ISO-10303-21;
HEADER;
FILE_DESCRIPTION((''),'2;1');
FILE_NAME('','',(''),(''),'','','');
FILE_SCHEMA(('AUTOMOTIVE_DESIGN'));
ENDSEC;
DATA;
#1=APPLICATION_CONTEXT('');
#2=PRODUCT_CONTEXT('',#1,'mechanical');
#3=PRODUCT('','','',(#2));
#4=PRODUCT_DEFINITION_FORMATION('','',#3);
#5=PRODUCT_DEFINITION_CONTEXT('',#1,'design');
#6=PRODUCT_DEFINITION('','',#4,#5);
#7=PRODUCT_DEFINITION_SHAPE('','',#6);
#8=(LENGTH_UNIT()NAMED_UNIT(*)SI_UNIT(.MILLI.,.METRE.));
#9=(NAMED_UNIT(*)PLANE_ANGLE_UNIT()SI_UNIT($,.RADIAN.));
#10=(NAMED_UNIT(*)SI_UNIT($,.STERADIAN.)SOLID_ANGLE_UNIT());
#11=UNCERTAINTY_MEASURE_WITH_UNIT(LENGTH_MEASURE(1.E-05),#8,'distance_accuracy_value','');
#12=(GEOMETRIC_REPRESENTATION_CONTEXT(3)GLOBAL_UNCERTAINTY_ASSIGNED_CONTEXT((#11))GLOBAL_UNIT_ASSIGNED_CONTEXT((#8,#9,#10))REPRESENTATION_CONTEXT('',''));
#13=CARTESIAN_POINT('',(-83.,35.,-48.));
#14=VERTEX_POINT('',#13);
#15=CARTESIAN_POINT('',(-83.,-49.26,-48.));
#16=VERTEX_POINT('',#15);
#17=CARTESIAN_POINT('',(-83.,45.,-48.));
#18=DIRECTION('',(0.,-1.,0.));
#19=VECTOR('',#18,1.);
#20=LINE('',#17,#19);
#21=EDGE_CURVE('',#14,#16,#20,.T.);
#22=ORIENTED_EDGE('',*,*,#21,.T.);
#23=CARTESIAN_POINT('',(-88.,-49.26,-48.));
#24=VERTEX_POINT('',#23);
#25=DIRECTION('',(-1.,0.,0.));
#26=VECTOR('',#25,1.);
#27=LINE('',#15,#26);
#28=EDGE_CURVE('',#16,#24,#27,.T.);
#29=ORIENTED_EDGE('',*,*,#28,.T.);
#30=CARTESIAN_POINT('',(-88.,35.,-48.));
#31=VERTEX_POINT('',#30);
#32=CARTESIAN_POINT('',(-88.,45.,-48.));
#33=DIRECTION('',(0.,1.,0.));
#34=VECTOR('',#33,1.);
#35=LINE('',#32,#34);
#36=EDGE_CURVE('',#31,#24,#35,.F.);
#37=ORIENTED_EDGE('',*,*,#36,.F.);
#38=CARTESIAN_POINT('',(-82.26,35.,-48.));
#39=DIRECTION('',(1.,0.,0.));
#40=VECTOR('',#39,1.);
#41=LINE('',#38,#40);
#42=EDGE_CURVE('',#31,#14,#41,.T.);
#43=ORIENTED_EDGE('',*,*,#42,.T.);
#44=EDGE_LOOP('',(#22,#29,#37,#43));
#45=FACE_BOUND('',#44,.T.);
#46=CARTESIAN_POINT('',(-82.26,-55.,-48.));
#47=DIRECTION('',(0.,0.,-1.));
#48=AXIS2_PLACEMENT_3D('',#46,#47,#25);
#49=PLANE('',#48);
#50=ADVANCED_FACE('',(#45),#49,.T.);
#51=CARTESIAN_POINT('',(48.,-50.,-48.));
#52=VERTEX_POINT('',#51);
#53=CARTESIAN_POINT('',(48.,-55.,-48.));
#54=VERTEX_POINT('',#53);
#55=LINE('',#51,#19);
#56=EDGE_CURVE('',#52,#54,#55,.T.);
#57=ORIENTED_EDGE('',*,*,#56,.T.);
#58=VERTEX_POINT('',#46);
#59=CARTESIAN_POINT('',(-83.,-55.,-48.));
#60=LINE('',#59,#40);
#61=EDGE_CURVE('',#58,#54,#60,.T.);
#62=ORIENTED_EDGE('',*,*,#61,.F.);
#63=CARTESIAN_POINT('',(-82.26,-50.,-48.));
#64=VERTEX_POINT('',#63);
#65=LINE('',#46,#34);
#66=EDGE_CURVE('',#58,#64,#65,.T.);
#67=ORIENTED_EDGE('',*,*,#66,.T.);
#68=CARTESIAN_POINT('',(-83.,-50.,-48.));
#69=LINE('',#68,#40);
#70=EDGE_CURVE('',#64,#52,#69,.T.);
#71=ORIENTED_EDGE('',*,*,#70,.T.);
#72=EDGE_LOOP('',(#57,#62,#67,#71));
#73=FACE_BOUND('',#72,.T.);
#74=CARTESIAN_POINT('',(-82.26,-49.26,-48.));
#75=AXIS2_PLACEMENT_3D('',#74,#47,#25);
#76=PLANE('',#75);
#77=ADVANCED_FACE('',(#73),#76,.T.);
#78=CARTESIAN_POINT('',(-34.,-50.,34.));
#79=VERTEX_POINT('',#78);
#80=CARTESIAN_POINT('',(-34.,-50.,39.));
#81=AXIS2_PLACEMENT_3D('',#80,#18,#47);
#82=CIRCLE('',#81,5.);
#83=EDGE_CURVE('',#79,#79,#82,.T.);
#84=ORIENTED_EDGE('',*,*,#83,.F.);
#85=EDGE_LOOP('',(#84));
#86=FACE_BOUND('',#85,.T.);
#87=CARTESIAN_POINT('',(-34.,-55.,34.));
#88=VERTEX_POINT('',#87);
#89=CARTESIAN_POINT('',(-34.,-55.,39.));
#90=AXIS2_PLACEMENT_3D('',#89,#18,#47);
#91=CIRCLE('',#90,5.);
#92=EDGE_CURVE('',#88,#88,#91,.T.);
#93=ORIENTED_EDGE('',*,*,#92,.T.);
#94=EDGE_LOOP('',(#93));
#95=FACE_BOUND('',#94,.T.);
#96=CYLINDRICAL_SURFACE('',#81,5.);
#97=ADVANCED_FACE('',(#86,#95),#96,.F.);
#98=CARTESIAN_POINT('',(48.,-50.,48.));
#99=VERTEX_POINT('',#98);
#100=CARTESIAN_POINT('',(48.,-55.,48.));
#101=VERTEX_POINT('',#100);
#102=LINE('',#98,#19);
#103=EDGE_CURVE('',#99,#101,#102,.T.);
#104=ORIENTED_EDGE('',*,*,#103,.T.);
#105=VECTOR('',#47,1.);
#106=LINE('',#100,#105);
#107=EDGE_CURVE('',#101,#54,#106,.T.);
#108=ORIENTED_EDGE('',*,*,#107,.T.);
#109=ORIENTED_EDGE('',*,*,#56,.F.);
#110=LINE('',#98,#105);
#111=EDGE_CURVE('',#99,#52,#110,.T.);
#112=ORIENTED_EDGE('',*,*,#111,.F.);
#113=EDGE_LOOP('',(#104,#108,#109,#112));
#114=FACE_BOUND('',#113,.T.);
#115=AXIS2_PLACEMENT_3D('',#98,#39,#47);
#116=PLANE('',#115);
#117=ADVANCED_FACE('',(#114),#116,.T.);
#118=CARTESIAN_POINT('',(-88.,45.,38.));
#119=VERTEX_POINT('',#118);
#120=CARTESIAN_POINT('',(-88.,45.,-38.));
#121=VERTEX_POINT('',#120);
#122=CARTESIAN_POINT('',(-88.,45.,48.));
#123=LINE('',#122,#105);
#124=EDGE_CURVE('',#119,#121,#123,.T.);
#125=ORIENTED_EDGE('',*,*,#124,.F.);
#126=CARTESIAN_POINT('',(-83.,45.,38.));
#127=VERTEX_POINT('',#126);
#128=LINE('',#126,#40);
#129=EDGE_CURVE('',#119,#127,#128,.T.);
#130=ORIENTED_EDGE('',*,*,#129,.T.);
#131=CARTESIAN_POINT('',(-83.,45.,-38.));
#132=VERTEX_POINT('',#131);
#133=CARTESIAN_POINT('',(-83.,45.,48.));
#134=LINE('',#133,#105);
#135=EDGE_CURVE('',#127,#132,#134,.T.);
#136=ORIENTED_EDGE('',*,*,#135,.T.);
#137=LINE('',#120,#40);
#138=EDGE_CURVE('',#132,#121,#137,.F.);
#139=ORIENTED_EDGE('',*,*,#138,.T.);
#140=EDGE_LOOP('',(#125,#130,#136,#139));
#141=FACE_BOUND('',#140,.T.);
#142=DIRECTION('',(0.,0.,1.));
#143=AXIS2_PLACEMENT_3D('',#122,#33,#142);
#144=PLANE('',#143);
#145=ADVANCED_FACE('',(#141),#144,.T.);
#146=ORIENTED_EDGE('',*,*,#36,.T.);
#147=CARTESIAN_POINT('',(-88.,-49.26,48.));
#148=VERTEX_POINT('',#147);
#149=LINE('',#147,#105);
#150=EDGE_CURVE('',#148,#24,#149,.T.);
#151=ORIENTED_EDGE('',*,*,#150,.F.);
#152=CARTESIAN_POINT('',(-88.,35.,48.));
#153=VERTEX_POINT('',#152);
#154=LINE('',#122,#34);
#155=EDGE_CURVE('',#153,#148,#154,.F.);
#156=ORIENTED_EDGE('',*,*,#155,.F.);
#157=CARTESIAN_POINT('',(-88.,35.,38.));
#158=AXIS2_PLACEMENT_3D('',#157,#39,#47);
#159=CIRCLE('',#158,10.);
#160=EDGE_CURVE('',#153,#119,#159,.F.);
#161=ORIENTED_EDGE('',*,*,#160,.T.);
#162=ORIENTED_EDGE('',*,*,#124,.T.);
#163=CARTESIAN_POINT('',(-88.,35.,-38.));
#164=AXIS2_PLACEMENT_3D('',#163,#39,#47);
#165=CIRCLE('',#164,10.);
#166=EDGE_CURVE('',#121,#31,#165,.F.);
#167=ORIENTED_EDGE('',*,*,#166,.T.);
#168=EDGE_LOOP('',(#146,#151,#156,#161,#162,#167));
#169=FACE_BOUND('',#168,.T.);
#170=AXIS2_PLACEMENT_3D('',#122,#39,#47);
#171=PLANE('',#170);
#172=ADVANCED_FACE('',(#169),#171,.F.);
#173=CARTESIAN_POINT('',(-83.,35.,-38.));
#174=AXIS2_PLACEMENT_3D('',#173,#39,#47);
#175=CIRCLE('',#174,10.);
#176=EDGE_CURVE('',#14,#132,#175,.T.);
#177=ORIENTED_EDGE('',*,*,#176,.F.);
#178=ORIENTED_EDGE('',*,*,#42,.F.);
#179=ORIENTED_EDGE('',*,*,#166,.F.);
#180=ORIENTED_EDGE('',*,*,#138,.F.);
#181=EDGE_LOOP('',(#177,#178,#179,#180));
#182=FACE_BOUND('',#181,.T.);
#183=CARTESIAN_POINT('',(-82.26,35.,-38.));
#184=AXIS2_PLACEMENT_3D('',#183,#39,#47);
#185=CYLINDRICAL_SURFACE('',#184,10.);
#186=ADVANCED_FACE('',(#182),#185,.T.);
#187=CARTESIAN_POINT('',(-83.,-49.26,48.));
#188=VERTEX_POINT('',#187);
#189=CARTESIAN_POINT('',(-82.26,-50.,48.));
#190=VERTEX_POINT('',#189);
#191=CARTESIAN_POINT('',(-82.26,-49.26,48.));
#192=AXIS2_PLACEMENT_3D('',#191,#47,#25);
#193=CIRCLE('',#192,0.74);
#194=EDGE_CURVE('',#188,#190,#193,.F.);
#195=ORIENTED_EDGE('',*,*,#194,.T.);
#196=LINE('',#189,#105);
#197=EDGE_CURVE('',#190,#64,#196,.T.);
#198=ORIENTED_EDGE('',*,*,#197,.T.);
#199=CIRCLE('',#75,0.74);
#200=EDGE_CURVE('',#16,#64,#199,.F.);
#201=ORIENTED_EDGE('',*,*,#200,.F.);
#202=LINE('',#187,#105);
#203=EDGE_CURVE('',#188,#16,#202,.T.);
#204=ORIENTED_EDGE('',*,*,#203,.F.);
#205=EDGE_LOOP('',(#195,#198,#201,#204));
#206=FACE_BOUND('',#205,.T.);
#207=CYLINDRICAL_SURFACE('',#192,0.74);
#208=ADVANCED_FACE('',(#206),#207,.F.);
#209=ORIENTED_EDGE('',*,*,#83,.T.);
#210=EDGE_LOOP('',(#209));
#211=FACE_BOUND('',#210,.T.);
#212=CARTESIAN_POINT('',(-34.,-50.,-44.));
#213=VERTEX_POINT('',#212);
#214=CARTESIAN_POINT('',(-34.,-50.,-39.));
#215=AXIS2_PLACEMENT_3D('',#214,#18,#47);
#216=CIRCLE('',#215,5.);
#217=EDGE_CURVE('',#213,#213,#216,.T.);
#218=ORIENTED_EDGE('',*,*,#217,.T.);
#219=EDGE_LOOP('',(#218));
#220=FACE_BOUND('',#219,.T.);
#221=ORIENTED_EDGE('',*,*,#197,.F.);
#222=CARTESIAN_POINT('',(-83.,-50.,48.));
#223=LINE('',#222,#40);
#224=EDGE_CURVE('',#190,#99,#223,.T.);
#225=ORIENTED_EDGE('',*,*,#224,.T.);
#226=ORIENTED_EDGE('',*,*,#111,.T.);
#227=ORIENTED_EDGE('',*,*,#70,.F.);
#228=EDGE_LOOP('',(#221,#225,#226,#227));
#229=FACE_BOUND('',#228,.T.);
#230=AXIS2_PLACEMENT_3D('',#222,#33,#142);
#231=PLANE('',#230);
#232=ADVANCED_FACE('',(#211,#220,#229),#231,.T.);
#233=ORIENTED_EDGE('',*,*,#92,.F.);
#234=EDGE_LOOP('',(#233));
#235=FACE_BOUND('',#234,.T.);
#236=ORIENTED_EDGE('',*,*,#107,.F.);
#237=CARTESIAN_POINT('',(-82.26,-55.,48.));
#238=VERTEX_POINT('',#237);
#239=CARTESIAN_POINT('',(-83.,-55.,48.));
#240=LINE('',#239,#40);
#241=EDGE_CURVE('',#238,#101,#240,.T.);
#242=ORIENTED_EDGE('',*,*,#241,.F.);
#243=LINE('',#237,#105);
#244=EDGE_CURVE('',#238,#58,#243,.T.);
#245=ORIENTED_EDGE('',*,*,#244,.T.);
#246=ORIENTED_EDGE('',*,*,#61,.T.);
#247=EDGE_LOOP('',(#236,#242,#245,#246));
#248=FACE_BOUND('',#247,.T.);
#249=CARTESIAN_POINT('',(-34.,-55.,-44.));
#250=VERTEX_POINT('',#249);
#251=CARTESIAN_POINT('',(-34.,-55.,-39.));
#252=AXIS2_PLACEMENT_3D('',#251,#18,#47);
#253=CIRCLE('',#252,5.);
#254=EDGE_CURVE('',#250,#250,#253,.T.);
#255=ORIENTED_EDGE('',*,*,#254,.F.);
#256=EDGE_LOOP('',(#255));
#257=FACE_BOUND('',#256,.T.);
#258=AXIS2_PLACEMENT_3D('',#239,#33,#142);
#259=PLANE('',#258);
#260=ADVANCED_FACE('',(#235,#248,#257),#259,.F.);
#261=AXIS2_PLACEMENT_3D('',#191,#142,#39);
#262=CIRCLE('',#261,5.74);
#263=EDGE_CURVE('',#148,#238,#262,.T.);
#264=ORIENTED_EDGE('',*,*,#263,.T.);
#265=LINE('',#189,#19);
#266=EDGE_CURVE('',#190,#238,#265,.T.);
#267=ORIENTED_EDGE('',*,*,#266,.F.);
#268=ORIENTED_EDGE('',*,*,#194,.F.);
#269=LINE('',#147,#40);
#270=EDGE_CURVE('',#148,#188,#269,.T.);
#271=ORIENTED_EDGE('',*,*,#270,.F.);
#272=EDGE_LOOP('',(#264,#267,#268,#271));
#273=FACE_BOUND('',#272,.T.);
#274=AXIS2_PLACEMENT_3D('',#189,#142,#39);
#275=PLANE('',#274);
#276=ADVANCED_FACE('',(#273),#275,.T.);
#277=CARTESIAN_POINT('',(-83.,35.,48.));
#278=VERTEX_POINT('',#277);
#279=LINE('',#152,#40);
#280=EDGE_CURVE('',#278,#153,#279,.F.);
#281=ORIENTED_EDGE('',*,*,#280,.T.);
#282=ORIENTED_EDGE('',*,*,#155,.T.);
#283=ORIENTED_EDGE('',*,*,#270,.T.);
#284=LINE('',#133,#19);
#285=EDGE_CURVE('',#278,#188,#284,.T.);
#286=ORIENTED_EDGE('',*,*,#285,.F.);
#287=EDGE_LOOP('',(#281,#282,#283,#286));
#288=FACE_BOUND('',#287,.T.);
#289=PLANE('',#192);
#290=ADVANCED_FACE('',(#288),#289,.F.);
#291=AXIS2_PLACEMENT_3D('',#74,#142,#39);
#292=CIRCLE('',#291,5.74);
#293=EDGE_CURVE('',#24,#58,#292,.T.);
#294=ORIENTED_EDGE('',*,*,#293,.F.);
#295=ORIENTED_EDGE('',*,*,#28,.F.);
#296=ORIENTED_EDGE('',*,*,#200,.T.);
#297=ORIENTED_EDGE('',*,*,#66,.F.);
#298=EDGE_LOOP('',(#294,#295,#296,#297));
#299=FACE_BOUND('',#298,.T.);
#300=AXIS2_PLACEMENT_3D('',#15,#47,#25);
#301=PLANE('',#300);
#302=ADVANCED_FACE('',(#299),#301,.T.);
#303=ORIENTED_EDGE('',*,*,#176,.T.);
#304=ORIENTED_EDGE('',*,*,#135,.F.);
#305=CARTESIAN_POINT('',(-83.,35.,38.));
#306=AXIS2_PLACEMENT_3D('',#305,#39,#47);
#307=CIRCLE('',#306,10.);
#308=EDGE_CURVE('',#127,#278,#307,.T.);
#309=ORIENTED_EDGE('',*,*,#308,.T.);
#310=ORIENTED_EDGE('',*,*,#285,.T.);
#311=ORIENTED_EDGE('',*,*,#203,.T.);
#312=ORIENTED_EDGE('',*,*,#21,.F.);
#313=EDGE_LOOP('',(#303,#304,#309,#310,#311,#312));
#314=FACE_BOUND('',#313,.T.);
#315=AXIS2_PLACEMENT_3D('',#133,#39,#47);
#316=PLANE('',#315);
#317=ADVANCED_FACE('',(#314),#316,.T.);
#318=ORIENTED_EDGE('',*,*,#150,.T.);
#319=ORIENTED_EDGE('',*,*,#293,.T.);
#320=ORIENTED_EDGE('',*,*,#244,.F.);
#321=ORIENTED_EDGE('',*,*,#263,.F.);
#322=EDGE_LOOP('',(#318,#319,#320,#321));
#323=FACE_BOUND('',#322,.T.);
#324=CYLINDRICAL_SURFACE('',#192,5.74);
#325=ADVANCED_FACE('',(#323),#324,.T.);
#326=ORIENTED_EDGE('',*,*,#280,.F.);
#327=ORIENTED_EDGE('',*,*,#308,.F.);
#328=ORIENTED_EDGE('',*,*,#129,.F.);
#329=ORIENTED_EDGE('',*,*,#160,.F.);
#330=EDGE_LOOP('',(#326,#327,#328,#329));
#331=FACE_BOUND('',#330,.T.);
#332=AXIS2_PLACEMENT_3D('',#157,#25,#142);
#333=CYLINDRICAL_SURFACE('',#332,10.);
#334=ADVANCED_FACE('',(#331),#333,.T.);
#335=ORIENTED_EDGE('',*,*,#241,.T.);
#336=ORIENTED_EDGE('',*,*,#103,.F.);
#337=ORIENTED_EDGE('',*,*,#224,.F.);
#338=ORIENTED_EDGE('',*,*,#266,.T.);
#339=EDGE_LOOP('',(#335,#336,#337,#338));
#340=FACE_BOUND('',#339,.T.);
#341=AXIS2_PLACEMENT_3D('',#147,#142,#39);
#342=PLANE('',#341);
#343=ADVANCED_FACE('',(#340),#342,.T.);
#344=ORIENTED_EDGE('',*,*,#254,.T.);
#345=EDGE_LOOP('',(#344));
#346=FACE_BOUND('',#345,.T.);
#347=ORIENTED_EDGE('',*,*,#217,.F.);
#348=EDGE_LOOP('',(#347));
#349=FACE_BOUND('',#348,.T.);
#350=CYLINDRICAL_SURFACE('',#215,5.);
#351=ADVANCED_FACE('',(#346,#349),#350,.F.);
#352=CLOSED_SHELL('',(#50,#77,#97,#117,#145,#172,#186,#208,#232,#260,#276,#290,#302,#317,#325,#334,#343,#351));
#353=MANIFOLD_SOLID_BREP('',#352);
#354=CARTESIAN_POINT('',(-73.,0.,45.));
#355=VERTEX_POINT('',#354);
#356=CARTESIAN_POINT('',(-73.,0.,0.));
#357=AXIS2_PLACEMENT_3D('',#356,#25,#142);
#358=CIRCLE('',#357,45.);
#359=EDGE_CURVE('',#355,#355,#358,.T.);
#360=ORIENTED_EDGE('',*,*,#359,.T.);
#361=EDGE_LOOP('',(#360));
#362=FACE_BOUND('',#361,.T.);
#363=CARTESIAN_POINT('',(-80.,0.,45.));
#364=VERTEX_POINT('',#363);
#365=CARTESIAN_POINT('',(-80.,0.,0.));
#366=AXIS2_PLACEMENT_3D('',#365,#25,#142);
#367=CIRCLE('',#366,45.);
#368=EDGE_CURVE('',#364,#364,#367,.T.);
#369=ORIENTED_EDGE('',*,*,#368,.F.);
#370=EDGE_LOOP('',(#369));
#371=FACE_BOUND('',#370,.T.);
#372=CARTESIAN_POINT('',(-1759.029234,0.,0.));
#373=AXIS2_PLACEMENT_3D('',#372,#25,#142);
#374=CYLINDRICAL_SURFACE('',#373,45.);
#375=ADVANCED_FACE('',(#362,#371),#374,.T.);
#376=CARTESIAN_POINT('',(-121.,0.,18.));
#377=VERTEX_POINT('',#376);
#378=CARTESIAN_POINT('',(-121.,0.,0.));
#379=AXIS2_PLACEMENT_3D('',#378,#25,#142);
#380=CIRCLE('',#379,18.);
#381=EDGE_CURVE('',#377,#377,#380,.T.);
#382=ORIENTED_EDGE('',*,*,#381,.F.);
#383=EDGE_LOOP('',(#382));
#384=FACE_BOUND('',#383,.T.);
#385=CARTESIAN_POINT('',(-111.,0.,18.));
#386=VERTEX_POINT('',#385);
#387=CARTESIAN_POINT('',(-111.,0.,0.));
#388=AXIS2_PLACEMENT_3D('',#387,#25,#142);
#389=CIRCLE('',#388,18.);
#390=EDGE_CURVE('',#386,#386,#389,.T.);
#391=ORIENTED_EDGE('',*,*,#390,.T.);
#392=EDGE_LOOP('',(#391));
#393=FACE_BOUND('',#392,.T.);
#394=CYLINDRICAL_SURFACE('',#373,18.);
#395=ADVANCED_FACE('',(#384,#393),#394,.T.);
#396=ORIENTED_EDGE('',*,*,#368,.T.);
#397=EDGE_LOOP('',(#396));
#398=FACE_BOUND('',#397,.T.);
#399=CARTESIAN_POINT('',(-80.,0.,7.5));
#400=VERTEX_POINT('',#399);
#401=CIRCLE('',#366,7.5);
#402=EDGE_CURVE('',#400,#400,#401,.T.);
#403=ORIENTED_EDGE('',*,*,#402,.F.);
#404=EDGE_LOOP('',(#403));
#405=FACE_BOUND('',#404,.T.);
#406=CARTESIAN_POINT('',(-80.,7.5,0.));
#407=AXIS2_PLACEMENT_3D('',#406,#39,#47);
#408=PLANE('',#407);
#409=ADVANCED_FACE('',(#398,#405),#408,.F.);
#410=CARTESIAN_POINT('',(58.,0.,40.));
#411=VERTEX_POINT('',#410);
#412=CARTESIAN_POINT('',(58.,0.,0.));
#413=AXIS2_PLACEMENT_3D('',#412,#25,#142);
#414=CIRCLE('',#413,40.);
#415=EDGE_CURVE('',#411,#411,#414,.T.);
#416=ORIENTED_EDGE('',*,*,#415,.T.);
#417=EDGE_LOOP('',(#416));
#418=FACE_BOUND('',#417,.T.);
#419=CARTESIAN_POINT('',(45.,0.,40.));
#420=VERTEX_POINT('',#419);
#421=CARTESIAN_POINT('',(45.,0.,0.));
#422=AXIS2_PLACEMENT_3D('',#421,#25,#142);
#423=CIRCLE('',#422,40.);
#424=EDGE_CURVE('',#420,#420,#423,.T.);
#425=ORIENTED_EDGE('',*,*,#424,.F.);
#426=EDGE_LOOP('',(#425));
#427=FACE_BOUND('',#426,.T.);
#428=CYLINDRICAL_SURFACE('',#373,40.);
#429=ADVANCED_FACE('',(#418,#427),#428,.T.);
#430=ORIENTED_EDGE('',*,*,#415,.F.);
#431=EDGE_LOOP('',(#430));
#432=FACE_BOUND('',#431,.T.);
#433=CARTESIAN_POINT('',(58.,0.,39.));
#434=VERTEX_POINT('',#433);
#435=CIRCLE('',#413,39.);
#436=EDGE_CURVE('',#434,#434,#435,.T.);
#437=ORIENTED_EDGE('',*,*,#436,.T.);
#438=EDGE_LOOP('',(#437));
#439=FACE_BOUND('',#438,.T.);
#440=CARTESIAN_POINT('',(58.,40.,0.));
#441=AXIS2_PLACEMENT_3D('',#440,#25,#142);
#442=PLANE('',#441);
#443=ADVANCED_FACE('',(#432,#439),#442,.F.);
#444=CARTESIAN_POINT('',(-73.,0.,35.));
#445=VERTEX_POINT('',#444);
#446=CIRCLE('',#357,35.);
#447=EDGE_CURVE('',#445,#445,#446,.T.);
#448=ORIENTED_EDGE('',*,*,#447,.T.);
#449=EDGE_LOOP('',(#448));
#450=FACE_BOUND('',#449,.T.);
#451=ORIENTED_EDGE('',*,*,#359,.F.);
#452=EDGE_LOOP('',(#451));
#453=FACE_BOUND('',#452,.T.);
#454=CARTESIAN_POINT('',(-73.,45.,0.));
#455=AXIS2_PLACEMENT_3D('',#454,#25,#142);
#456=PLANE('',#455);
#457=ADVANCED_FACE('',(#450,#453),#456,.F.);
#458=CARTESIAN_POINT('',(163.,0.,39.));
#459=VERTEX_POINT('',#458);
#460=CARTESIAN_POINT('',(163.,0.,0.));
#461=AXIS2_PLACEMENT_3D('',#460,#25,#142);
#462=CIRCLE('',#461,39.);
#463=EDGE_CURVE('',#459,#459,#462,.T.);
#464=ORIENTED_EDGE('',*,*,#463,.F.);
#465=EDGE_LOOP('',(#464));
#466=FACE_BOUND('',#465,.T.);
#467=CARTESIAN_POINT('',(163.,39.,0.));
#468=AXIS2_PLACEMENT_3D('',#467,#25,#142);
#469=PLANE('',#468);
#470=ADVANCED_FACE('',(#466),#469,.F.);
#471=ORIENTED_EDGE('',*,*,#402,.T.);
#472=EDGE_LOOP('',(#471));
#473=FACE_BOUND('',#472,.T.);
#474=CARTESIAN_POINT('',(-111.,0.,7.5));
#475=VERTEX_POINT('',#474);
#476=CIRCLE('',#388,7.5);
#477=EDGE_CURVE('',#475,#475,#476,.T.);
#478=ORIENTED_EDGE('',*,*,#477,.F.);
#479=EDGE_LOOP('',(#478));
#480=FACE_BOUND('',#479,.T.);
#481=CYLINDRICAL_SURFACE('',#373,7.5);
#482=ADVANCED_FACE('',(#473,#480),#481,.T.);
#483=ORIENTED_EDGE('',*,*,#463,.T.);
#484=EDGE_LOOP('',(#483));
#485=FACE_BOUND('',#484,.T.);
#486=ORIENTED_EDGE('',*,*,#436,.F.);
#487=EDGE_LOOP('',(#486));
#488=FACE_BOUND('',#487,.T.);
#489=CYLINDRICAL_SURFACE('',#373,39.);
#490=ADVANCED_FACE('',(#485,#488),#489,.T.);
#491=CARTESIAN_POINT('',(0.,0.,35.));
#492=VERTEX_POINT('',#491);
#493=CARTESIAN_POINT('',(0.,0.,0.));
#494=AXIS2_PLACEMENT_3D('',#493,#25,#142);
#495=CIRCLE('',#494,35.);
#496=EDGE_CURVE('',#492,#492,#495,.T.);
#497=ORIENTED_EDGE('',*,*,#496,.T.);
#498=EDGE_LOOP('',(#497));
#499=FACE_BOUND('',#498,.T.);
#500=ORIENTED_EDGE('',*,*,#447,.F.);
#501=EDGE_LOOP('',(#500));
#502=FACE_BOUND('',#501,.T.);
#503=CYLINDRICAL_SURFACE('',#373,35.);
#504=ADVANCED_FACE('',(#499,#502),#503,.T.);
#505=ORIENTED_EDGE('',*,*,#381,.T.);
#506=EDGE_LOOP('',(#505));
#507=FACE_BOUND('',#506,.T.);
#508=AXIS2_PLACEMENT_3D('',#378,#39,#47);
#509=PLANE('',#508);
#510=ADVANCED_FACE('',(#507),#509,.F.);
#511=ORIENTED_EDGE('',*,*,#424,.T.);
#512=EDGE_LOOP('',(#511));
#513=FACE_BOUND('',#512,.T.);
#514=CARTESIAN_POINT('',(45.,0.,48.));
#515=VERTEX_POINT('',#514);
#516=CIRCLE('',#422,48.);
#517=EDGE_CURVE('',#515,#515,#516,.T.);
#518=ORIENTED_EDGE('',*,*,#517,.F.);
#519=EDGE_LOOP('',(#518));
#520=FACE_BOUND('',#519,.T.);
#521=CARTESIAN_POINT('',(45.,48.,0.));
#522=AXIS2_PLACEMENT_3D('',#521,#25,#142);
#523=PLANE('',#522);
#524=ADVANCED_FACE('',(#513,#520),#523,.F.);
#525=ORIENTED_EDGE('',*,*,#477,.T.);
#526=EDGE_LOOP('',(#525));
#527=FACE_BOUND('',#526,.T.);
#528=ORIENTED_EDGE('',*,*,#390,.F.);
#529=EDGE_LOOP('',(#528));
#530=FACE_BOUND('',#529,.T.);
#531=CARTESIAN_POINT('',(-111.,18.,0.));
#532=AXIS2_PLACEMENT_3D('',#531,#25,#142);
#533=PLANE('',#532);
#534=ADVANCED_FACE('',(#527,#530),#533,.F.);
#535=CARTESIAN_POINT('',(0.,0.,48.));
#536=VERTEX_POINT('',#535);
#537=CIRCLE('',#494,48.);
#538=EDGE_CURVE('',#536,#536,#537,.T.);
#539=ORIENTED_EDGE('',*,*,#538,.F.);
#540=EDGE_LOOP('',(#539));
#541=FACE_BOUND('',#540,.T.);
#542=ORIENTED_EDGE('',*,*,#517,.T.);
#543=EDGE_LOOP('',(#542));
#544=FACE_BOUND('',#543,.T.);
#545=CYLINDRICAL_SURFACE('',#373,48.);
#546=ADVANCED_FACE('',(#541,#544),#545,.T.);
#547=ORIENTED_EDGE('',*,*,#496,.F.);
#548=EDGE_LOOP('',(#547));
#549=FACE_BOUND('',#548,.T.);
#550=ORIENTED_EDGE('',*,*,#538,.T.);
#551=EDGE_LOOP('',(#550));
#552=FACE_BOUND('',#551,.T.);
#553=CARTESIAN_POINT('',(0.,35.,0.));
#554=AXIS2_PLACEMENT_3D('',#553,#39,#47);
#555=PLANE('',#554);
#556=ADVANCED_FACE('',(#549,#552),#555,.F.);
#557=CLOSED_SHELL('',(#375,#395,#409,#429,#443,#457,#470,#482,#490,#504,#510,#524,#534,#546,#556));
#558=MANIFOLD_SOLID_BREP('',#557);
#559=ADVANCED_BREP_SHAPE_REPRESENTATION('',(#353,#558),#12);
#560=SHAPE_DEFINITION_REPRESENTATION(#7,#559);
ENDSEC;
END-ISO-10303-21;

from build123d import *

# Parameters (mm, degrees)
SM_BASE_FLANGE_1_DEPTH = 48
FILLET_1_R             = 10
SKETCH_7_R             = 5
CUT_EXTRUDE_1_DEPTH    = 10


# Sheet-metal steps are written as plain solids
with BuildPart() as part:
    # Sketch 1 → Повернуть1 (revolve)
    with BuildSketch(Plane.XY, mode=Mode.PRIVATE) as revolve_1_sk:
        Polygon((-121, 0), (-121, 18), (-111, 18), (-111, 7.5), (-80, 7.5), (-80, 45), (-73, 45), (-73, 35), (0, 35), (0, 48), (45, 48), (45, 40), (58, 40), (58, 39), (163, 39), (163, 0), align=None)
    revolve(revolve_1_sk.sketch.rotate(Axis((-1759.029233716, 0, 0), (1, 0, 0)), 90), axis=Axis((-1759.029233716, 0, 0), (1, 0, 0)))


with BuildPart() as body_2:
    # Sketch 2 → Базовая кромка1 (new, symmetric)
    with BuildSketch(Plane.XY):
        with BuildLine():
            Line((-83, 45), (-83, -49.26))
            ThreePointArc((-83, -49.26), (-82.783259018, -49.783259018), (-82.26, -50))
            Line((-82.26, -50), (48, -50))
            Line((48, -50), (48, -55))
            Line((48, -55), (-82.26, -55))
            ThreePointArc((-82.26, -55), (-86.318792924, -53.318792924), (-88, -49.26))
            Line((-88, -49.26), (-88, 45))
            Line((-88, 45), (-83, 45))
        make_face()
    extrude(amount=SM_BASE_FLANGE_1_DEPTH, both=True)

    # Скругление1
    fillet_1_edges = [body_2.edges().sort_by_distance(p)[0] for p in [
        (-85.5, 45, 48),
        (-85.5, 45, -48),
    ]]
    fillet(fillet_1_edges, radius=FILLET_1_R)

    # Эскиз7 → Вырез-Вытянуть1 (cut)
    with BuildSketch(Plane.XZ.offset(55)):
        with Locations(Location((-34, 39, 0), (0, 0, 270))):
            Circle(SKETCH_7_R)
        with Locations(Location((-34, -39, 0), (0, 0, 270))):
            Circle(SKETCH_7_R)
    extrude(amount=-CUT_EXTRUDE_1_DEPTH, mode=Mode.SUBTRACT)


solid = Compound([part.part, body_2.part])
